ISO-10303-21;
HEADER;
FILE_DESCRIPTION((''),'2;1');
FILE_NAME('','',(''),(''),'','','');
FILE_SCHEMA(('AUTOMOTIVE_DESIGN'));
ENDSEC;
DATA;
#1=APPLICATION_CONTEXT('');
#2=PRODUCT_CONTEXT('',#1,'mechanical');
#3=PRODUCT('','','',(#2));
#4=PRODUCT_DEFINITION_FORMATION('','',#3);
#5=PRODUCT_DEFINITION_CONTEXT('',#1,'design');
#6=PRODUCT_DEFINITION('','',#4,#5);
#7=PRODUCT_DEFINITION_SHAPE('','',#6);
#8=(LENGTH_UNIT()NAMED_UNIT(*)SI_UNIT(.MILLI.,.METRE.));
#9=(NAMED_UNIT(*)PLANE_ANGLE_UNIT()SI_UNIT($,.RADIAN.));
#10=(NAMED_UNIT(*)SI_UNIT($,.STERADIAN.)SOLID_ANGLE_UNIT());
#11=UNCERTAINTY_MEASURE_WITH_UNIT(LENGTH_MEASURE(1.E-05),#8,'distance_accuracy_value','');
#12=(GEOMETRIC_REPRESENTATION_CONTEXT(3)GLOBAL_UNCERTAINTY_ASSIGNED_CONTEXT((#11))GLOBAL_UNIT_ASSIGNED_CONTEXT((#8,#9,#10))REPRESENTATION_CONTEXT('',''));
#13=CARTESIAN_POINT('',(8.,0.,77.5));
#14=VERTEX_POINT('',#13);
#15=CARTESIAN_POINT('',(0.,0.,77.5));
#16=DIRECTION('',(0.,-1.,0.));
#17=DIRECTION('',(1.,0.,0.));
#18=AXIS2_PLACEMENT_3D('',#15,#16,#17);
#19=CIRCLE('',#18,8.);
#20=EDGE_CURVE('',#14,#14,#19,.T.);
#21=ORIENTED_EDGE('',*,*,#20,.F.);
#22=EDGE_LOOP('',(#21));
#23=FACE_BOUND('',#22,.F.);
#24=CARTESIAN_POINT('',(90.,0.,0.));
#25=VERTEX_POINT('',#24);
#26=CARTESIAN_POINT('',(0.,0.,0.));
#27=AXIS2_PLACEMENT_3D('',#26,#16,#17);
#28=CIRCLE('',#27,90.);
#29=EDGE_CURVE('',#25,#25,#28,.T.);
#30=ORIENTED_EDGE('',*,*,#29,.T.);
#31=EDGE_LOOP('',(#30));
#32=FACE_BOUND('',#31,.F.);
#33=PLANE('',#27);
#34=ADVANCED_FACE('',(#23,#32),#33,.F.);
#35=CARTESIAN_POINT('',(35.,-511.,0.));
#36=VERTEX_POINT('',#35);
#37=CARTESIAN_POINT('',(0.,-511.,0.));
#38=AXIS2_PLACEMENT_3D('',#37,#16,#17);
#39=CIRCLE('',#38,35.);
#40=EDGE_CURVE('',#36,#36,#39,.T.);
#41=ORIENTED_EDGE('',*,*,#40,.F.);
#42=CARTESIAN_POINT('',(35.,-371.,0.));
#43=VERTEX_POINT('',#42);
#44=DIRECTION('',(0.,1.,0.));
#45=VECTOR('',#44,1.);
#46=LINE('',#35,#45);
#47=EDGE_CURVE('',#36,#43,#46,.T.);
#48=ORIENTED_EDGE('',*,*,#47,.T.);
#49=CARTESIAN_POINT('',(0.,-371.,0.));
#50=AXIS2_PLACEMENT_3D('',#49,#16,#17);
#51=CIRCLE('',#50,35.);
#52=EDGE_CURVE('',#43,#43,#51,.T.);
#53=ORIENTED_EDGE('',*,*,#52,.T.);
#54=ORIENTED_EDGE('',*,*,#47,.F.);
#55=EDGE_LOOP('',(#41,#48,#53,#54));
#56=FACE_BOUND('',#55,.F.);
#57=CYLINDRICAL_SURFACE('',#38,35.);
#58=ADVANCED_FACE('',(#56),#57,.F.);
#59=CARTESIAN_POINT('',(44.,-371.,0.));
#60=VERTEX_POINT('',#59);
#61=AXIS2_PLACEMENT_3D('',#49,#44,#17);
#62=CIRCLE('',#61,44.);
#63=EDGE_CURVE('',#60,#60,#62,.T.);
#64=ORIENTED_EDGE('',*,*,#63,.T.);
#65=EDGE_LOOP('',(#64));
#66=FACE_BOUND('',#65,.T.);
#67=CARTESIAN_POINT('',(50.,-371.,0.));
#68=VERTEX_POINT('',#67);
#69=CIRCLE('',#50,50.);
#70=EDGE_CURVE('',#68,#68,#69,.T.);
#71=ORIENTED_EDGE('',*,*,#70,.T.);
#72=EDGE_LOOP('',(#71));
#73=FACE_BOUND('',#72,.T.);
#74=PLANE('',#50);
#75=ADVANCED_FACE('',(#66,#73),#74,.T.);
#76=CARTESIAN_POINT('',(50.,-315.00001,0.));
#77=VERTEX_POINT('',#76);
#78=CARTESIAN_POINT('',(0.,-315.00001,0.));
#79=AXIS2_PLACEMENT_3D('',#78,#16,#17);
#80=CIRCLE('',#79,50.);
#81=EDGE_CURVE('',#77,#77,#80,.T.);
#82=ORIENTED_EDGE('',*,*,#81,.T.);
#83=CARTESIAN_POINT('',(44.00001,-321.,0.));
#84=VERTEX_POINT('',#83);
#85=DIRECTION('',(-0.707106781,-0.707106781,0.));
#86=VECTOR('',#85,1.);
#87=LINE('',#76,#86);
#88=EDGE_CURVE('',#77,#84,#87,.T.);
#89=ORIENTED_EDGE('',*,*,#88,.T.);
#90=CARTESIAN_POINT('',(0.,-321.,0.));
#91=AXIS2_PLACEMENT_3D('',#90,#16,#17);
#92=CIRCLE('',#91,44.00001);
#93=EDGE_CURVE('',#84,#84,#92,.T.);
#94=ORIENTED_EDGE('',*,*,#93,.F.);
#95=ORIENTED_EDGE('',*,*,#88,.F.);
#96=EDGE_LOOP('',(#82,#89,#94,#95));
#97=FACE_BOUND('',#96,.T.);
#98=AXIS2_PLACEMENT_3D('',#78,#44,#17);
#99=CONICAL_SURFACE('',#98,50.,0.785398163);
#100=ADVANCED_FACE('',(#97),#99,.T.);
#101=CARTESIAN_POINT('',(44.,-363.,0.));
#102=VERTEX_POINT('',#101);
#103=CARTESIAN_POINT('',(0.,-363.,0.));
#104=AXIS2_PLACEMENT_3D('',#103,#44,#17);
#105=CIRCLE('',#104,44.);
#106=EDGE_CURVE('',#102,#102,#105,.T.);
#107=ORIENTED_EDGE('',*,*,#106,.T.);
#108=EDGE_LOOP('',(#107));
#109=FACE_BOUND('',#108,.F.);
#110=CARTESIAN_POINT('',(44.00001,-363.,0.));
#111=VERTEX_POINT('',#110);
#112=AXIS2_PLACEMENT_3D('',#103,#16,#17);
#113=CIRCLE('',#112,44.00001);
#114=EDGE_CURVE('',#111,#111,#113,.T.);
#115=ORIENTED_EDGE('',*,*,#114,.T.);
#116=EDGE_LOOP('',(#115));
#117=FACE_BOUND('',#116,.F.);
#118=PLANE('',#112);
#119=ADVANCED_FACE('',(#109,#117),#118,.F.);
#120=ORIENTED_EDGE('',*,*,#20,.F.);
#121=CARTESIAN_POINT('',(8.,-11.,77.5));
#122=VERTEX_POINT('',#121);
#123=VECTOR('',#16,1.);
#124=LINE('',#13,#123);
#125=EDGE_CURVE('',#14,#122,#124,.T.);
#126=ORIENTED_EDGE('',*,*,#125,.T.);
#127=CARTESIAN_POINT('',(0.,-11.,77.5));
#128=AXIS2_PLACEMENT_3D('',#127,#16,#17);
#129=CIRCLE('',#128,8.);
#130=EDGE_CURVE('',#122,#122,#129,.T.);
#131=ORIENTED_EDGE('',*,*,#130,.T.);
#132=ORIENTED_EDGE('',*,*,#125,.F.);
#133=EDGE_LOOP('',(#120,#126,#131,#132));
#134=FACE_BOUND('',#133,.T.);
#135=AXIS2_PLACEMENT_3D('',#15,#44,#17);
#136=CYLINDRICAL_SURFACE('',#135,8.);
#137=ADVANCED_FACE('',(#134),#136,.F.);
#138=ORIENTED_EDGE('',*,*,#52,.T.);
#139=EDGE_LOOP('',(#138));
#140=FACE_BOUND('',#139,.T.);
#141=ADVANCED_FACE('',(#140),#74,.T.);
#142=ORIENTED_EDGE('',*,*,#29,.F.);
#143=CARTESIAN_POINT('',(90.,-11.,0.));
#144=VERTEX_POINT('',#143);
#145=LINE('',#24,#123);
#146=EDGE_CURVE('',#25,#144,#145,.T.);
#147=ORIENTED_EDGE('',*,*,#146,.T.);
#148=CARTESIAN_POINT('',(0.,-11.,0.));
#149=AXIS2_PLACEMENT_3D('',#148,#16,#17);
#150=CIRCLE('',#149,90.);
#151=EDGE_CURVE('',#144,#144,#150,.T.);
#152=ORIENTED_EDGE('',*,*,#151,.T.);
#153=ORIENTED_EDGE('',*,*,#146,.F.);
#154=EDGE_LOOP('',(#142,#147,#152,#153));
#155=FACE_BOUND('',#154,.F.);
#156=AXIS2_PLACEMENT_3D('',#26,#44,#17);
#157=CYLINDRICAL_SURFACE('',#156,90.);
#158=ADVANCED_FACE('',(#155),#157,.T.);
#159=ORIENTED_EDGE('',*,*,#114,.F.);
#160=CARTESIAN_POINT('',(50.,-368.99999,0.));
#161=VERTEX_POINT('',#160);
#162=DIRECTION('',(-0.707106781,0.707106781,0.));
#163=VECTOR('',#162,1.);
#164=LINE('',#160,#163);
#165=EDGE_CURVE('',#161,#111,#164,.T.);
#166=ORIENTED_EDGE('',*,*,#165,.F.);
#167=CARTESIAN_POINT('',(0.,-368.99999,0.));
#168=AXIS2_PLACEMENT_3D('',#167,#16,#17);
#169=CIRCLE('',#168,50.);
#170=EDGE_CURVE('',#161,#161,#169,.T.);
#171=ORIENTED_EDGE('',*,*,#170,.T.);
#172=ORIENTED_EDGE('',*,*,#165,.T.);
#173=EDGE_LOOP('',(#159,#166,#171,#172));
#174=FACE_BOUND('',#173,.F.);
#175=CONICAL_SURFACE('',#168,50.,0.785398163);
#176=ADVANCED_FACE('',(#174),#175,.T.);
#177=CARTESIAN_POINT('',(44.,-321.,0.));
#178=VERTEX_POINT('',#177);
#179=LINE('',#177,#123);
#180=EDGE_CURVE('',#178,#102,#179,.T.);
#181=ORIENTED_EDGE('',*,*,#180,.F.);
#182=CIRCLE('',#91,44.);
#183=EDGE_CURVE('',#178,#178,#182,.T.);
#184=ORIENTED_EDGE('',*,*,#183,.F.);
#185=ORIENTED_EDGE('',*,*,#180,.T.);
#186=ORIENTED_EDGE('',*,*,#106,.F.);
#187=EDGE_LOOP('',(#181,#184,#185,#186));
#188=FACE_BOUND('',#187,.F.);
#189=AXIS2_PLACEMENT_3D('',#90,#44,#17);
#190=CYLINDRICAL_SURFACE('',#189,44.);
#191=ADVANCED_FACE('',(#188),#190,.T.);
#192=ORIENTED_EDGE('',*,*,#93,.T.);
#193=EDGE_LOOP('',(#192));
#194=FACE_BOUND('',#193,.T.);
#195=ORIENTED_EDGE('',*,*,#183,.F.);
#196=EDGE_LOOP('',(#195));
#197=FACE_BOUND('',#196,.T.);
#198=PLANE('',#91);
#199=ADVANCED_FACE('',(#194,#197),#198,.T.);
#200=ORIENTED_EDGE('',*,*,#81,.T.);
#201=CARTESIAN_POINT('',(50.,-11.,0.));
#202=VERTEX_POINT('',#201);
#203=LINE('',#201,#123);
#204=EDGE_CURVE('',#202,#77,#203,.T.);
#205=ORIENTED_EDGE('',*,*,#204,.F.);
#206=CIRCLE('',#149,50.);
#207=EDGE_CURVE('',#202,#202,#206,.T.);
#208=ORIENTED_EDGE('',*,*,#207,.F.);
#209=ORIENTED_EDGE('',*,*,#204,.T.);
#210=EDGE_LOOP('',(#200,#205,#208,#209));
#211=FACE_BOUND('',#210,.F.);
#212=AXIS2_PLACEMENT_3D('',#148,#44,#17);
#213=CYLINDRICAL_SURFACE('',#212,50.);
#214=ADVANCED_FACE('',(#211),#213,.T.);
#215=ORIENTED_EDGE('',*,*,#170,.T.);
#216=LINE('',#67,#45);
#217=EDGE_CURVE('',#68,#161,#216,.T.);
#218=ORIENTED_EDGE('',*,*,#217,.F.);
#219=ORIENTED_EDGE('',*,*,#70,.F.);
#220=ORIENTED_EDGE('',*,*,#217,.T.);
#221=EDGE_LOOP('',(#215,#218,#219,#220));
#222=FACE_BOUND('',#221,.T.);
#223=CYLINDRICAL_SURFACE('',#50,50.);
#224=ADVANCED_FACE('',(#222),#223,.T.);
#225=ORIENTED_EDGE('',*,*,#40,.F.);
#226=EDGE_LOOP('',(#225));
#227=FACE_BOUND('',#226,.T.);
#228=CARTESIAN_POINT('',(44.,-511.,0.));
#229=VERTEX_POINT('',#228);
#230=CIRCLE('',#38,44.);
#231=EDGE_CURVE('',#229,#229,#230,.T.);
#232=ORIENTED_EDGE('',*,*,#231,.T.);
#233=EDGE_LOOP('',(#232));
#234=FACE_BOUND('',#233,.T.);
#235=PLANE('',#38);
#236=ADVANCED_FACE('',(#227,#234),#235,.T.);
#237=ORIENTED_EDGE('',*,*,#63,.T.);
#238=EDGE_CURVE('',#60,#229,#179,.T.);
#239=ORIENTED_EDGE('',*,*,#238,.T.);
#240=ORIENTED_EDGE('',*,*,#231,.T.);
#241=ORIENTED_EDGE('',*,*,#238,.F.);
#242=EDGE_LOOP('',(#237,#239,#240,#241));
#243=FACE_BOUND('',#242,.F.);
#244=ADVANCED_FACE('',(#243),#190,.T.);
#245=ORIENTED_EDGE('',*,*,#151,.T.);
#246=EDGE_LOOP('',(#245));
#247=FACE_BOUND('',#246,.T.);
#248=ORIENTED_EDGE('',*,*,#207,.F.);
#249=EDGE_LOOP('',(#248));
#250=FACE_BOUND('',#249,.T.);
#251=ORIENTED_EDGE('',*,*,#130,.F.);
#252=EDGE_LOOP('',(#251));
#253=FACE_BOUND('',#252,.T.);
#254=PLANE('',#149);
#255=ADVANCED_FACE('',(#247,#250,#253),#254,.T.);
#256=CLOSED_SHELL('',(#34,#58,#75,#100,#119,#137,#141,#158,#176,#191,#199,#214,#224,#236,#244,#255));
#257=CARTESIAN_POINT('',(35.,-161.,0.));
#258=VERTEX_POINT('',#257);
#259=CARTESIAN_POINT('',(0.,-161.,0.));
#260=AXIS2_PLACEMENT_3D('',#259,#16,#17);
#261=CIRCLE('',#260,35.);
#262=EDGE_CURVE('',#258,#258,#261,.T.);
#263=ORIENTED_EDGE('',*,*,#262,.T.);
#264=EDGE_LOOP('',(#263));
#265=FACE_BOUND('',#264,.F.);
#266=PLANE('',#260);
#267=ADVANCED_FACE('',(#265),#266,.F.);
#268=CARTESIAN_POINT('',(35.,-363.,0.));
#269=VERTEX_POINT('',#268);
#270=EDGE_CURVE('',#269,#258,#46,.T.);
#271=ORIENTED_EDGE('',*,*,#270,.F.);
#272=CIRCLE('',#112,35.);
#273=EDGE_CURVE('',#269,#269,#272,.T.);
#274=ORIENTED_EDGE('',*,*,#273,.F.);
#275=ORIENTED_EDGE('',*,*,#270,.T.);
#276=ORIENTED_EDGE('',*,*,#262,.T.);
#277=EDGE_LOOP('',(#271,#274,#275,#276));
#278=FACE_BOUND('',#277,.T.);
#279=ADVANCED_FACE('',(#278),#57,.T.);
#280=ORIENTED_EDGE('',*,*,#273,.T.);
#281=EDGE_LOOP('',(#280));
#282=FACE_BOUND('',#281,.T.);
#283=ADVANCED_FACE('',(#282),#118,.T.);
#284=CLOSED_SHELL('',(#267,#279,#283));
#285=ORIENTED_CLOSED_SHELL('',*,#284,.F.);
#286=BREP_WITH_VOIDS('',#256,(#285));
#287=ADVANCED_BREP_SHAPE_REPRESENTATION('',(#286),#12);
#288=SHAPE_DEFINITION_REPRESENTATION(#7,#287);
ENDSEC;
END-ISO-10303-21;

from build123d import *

# Parameters (mm, degrees)
F0_R      = 90
F0_R_2    = 8
F1_DEPTH  = 11
F2_R      = 50
F3_DEPTH  = 310
F4_R      = 44
F5_DEPTH  = 190
F6_R      = 35
F7_DEPTH  = 350
F8_SIZE   = 5.99999
F10_R     = 50
F11_DEPTH = 8
F12_SIZE  = 5.99999


# Not quite as in the source:
# - a fillet or chamfer is up to 0.001 mm smaller than in the source, because OpenCascade refuses the exact size


with BuildPart() as f1:
    # F0 (on Front) → F1 (new body)
    with BuildSketch(Plane.XZ):
        Circle(F0_R)
        with Locations((0, 77.5)):
            Circle(F0_R_2, mode=Mode.SUBTRACT)
    extrude(amount=F1_DEPTH)

    # F2 (on face) → F3 (join)
    with BuildSketch(Plane.XZ.offset(11)):
        Circle(F2_R)
    extrude(amount=F3_DEPTH)

    # F4 (on face) → F5 (join)
    with BuildSketch(Plane.XZ.offset(321)):
        Circle(F4_R)
    extrude(amount=F5_DEPTH)

    # F6 (on face) → F7 (cut)
    with BuildSketch(Plane.XZ.offset(511)):
        Circle(F6_R)
    extrude(amount=-F7_DEPTH, mode=Mode.SUBTRACT)

    # F8 (size 6 in the source; OpenCascade refuses exactly that, so slightly less here)
    f8_edges = [f1.edges().sort_by_distance(p)[0] for p in [
        (-50, -321, 0),
    ]]
    chamfer(f8_edges, length=F8_SIZE)

    # F10 (on offset) → F11 (join)
    with BuildSketch(Plane.XZ.offset(371)):
        Circle(F10_R)
    extrude(amount=-F11_DEPTH)

    # F12 (size 6 in the source; OpenCascade refuses exactly that, so slightly less here)
    f12_edges = [f1.edges().sort_by_distance(p)[0] for p in [
        (-50, -363, 0),
    ]]
    chamfer(f12_edges, length=F12_SIZE)


solid = f1.part
